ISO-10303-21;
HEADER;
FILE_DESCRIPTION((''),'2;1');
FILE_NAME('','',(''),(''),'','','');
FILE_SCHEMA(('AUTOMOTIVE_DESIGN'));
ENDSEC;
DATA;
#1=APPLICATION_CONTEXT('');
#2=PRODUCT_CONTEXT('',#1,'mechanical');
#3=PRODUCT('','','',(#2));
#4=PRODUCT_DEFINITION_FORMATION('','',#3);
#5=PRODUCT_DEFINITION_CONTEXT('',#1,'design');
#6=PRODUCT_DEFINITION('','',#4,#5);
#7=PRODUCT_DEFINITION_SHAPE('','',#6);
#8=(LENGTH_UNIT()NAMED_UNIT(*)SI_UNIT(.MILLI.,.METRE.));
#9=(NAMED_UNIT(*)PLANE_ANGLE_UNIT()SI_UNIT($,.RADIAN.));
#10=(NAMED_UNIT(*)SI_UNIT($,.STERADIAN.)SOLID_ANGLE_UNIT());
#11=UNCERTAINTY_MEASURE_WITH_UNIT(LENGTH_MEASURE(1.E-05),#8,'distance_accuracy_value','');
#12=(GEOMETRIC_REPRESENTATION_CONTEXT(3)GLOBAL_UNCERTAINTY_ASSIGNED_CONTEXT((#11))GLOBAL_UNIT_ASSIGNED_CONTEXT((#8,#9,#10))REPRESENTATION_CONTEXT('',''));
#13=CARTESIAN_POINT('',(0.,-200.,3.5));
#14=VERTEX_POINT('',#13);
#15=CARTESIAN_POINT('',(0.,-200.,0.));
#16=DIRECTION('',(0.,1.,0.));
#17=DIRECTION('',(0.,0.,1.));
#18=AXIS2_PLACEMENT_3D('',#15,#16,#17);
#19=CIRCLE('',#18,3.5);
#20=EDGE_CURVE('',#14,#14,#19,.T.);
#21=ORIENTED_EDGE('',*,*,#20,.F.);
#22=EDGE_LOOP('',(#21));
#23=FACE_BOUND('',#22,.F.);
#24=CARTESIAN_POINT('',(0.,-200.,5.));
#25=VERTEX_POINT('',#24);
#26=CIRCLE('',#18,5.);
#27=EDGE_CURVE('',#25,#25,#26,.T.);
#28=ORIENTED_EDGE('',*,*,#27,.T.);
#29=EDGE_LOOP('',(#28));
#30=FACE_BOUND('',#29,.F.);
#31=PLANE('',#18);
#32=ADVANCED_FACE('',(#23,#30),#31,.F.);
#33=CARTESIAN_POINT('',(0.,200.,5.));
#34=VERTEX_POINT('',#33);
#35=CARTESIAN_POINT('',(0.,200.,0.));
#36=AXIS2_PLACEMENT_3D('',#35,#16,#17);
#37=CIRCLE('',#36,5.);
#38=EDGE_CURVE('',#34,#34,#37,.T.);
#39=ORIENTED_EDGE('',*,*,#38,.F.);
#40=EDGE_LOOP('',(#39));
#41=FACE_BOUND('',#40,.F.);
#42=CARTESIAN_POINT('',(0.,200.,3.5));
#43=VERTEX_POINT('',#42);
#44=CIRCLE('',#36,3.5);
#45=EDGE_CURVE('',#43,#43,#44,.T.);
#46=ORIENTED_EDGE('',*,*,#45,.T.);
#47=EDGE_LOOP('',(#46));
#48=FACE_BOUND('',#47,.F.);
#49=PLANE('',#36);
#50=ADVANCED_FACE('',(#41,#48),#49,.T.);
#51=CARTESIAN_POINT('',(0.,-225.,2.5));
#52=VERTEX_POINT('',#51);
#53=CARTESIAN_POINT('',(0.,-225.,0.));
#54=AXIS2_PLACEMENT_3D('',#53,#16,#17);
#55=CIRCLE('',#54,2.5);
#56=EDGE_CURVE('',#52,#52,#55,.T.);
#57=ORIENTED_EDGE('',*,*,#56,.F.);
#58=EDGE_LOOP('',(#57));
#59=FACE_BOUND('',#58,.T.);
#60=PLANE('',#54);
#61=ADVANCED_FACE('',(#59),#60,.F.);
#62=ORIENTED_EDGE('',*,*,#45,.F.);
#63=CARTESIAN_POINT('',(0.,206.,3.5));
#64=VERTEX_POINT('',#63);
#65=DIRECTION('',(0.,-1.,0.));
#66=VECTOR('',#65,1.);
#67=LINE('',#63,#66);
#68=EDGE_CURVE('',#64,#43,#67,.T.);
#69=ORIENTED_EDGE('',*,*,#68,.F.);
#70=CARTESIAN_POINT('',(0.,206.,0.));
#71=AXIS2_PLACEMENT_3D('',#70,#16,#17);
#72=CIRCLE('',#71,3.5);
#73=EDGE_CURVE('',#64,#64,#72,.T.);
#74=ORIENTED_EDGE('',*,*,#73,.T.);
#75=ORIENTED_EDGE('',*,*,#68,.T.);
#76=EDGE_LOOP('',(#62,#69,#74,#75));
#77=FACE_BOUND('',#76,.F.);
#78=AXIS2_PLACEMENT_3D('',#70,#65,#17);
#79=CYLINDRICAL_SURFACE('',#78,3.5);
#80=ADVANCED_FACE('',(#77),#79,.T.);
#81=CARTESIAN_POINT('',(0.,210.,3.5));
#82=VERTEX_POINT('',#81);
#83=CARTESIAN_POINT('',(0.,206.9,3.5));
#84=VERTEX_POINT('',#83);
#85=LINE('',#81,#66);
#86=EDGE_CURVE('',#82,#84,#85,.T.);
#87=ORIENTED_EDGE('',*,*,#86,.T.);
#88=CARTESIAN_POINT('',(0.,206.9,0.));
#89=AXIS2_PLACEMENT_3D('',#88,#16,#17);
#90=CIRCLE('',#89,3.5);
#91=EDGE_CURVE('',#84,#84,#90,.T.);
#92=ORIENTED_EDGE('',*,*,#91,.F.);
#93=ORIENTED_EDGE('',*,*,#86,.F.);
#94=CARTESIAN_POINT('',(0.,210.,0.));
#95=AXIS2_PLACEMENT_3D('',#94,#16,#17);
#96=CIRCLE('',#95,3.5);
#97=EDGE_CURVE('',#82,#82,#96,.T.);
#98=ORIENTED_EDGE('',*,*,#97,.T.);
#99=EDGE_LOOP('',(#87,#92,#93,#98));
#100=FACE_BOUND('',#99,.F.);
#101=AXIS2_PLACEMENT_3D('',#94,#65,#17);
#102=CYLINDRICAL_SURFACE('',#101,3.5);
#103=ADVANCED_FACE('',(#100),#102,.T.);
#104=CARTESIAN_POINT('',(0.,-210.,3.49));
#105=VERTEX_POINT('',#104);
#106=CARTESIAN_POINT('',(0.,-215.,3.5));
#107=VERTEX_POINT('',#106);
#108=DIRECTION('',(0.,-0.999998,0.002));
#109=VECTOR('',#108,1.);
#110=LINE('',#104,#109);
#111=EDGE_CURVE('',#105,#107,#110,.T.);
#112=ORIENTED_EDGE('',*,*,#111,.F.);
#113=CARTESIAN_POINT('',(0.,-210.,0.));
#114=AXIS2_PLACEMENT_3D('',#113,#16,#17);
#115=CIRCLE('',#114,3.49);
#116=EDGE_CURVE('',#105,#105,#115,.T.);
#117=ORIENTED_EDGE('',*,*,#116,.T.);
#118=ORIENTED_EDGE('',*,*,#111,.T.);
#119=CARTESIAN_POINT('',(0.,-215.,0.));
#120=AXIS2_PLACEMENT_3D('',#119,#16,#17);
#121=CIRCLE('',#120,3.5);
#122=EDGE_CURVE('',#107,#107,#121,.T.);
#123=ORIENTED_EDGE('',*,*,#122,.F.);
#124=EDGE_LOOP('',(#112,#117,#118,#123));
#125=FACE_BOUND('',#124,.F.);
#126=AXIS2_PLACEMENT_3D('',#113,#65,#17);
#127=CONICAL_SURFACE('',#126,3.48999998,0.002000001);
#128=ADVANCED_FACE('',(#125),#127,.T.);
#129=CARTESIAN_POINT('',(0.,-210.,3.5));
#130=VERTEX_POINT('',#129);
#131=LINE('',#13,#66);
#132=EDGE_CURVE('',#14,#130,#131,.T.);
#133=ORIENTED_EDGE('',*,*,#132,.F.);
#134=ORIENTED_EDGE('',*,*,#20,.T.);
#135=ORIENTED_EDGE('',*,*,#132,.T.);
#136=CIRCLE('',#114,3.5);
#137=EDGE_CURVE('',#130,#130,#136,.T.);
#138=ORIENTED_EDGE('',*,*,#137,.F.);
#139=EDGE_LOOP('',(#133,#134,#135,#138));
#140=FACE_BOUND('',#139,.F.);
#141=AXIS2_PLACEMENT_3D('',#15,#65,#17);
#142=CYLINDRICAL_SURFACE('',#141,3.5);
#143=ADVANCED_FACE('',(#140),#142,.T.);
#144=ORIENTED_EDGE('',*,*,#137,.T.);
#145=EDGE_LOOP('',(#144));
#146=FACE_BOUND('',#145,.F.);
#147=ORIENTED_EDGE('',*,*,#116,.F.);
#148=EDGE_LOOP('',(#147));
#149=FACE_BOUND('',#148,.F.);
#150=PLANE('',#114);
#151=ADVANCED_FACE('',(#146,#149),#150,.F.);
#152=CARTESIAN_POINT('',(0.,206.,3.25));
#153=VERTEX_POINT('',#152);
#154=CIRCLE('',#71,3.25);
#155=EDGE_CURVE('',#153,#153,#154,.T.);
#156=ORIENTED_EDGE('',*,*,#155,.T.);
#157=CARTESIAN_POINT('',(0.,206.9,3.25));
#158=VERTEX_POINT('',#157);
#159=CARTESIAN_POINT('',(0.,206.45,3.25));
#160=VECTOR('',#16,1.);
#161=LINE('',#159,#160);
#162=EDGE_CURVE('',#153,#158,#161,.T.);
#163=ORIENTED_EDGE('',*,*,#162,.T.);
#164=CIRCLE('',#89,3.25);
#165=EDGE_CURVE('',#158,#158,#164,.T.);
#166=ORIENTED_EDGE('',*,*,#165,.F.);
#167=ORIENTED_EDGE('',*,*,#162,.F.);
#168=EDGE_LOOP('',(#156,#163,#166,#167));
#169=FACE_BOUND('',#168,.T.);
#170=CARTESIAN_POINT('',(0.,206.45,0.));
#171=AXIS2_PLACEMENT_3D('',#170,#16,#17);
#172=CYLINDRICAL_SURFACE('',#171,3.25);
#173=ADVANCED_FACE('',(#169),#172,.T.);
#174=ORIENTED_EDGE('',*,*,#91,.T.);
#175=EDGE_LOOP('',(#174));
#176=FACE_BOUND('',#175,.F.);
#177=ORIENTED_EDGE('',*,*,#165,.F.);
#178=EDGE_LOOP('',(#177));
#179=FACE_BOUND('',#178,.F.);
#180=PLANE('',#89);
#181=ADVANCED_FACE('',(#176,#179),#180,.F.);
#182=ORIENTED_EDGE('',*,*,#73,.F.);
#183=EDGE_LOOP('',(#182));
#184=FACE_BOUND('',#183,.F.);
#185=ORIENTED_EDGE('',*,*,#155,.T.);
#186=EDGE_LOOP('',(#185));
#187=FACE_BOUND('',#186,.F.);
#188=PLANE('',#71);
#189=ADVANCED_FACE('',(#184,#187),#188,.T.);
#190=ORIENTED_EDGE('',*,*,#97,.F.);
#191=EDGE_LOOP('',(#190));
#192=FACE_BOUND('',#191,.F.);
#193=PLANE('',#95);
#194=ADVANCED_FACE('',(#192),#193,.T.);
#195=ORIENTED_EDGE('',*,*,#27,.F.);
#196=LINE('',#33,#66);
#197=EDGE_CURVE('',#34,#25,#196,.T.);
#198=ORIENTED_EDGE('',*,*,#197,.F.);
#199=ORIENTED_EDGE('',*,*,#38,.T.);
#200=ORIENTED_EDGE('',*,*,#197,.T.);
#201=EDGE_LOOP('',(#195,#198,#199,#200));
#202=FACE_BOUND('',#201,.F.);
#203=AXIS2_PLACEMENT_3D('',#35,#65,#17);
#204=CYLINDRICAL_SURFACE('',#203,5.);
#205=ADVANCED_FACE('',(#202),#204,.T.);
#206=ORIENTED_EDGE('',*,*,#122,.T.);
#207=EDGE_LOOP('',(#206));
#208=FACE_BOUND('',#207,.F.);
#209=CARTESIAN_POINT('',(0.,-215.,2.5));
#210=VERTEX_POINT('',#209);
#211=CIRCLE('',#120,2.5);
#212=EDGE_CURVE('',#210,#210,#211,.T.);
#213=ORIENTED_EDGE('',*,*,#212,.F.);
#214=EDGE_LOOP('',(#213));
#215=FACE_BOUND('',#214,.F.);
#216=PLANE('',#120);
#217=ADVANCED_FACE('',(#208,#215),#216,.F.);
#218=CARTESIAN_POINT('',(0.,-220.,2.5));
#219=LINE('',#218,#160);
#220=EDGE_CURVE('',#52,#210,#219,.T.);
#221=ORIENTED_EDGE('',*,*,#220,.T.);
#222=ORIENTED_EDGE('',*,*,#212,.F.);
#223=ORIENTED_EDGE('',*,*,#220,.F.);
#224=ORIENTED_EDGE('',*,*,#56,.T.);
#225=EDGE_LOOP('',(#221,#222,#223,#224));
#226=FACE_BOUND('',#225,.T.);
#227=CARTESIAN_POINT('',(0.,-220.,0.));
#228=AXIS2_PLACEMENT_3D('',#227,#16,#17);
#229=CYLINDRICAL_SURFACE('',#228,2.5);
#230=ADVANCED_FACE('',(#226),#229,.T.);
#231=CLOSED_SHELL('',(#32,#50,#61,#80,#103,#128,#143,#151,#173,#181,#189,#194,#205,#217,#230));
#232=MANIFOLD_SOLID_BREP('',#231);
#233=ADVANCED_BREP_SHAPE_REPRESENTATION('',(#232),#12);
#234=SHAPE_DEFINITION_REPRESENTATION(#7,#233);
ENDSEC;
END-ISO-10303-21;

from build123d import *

# Parameters (mm, degrees)
F0_W   = 10
F0_H   = 2.5
F0_W_2 = 0.9
F0_H_2 = 3.25


# Not quite as in the source:
# - a feature names something its author has since deleted; it is built from what else it names


with BuildPart() as f1:
    # F0 (on Right) → F1 (revolve)
    with BuildSketch(Plane.YZ):
        Polygon((200, 3.5), (200, 5), (-200, 5), (-200, 3.5), (-200, 0), (200, 0), align=None)
        Polygon((-200, 0), (-200, 3.5), (-210, 3.5), (-210, 3.48999998), (-210, 0), align=None)
        with Locations((-220, 1.25)):
            Rectangle(F0_W, F0_H)
        Polygon((206, 3.5), (200, 3.5), (200, 0), (206, 0), (206, 3.25), align=None)
        with Locations((206.45, 1.625)):
            Rectangle(F0_W_2, F0_H_2)
        Polygon((206.9, 3.25), (206.9, 0), (210, 0), (210, 3.5), (206.9, 3.5), align=None)
        Polygon((-215, 0), (-210, 0), (-210, 3.48999998), (-215, 3.5), (-215, 2.5), align=None)
    revolve(axis=Axis((0, -7.5, 0), (0, 1, 0)))


solid = f1.part
